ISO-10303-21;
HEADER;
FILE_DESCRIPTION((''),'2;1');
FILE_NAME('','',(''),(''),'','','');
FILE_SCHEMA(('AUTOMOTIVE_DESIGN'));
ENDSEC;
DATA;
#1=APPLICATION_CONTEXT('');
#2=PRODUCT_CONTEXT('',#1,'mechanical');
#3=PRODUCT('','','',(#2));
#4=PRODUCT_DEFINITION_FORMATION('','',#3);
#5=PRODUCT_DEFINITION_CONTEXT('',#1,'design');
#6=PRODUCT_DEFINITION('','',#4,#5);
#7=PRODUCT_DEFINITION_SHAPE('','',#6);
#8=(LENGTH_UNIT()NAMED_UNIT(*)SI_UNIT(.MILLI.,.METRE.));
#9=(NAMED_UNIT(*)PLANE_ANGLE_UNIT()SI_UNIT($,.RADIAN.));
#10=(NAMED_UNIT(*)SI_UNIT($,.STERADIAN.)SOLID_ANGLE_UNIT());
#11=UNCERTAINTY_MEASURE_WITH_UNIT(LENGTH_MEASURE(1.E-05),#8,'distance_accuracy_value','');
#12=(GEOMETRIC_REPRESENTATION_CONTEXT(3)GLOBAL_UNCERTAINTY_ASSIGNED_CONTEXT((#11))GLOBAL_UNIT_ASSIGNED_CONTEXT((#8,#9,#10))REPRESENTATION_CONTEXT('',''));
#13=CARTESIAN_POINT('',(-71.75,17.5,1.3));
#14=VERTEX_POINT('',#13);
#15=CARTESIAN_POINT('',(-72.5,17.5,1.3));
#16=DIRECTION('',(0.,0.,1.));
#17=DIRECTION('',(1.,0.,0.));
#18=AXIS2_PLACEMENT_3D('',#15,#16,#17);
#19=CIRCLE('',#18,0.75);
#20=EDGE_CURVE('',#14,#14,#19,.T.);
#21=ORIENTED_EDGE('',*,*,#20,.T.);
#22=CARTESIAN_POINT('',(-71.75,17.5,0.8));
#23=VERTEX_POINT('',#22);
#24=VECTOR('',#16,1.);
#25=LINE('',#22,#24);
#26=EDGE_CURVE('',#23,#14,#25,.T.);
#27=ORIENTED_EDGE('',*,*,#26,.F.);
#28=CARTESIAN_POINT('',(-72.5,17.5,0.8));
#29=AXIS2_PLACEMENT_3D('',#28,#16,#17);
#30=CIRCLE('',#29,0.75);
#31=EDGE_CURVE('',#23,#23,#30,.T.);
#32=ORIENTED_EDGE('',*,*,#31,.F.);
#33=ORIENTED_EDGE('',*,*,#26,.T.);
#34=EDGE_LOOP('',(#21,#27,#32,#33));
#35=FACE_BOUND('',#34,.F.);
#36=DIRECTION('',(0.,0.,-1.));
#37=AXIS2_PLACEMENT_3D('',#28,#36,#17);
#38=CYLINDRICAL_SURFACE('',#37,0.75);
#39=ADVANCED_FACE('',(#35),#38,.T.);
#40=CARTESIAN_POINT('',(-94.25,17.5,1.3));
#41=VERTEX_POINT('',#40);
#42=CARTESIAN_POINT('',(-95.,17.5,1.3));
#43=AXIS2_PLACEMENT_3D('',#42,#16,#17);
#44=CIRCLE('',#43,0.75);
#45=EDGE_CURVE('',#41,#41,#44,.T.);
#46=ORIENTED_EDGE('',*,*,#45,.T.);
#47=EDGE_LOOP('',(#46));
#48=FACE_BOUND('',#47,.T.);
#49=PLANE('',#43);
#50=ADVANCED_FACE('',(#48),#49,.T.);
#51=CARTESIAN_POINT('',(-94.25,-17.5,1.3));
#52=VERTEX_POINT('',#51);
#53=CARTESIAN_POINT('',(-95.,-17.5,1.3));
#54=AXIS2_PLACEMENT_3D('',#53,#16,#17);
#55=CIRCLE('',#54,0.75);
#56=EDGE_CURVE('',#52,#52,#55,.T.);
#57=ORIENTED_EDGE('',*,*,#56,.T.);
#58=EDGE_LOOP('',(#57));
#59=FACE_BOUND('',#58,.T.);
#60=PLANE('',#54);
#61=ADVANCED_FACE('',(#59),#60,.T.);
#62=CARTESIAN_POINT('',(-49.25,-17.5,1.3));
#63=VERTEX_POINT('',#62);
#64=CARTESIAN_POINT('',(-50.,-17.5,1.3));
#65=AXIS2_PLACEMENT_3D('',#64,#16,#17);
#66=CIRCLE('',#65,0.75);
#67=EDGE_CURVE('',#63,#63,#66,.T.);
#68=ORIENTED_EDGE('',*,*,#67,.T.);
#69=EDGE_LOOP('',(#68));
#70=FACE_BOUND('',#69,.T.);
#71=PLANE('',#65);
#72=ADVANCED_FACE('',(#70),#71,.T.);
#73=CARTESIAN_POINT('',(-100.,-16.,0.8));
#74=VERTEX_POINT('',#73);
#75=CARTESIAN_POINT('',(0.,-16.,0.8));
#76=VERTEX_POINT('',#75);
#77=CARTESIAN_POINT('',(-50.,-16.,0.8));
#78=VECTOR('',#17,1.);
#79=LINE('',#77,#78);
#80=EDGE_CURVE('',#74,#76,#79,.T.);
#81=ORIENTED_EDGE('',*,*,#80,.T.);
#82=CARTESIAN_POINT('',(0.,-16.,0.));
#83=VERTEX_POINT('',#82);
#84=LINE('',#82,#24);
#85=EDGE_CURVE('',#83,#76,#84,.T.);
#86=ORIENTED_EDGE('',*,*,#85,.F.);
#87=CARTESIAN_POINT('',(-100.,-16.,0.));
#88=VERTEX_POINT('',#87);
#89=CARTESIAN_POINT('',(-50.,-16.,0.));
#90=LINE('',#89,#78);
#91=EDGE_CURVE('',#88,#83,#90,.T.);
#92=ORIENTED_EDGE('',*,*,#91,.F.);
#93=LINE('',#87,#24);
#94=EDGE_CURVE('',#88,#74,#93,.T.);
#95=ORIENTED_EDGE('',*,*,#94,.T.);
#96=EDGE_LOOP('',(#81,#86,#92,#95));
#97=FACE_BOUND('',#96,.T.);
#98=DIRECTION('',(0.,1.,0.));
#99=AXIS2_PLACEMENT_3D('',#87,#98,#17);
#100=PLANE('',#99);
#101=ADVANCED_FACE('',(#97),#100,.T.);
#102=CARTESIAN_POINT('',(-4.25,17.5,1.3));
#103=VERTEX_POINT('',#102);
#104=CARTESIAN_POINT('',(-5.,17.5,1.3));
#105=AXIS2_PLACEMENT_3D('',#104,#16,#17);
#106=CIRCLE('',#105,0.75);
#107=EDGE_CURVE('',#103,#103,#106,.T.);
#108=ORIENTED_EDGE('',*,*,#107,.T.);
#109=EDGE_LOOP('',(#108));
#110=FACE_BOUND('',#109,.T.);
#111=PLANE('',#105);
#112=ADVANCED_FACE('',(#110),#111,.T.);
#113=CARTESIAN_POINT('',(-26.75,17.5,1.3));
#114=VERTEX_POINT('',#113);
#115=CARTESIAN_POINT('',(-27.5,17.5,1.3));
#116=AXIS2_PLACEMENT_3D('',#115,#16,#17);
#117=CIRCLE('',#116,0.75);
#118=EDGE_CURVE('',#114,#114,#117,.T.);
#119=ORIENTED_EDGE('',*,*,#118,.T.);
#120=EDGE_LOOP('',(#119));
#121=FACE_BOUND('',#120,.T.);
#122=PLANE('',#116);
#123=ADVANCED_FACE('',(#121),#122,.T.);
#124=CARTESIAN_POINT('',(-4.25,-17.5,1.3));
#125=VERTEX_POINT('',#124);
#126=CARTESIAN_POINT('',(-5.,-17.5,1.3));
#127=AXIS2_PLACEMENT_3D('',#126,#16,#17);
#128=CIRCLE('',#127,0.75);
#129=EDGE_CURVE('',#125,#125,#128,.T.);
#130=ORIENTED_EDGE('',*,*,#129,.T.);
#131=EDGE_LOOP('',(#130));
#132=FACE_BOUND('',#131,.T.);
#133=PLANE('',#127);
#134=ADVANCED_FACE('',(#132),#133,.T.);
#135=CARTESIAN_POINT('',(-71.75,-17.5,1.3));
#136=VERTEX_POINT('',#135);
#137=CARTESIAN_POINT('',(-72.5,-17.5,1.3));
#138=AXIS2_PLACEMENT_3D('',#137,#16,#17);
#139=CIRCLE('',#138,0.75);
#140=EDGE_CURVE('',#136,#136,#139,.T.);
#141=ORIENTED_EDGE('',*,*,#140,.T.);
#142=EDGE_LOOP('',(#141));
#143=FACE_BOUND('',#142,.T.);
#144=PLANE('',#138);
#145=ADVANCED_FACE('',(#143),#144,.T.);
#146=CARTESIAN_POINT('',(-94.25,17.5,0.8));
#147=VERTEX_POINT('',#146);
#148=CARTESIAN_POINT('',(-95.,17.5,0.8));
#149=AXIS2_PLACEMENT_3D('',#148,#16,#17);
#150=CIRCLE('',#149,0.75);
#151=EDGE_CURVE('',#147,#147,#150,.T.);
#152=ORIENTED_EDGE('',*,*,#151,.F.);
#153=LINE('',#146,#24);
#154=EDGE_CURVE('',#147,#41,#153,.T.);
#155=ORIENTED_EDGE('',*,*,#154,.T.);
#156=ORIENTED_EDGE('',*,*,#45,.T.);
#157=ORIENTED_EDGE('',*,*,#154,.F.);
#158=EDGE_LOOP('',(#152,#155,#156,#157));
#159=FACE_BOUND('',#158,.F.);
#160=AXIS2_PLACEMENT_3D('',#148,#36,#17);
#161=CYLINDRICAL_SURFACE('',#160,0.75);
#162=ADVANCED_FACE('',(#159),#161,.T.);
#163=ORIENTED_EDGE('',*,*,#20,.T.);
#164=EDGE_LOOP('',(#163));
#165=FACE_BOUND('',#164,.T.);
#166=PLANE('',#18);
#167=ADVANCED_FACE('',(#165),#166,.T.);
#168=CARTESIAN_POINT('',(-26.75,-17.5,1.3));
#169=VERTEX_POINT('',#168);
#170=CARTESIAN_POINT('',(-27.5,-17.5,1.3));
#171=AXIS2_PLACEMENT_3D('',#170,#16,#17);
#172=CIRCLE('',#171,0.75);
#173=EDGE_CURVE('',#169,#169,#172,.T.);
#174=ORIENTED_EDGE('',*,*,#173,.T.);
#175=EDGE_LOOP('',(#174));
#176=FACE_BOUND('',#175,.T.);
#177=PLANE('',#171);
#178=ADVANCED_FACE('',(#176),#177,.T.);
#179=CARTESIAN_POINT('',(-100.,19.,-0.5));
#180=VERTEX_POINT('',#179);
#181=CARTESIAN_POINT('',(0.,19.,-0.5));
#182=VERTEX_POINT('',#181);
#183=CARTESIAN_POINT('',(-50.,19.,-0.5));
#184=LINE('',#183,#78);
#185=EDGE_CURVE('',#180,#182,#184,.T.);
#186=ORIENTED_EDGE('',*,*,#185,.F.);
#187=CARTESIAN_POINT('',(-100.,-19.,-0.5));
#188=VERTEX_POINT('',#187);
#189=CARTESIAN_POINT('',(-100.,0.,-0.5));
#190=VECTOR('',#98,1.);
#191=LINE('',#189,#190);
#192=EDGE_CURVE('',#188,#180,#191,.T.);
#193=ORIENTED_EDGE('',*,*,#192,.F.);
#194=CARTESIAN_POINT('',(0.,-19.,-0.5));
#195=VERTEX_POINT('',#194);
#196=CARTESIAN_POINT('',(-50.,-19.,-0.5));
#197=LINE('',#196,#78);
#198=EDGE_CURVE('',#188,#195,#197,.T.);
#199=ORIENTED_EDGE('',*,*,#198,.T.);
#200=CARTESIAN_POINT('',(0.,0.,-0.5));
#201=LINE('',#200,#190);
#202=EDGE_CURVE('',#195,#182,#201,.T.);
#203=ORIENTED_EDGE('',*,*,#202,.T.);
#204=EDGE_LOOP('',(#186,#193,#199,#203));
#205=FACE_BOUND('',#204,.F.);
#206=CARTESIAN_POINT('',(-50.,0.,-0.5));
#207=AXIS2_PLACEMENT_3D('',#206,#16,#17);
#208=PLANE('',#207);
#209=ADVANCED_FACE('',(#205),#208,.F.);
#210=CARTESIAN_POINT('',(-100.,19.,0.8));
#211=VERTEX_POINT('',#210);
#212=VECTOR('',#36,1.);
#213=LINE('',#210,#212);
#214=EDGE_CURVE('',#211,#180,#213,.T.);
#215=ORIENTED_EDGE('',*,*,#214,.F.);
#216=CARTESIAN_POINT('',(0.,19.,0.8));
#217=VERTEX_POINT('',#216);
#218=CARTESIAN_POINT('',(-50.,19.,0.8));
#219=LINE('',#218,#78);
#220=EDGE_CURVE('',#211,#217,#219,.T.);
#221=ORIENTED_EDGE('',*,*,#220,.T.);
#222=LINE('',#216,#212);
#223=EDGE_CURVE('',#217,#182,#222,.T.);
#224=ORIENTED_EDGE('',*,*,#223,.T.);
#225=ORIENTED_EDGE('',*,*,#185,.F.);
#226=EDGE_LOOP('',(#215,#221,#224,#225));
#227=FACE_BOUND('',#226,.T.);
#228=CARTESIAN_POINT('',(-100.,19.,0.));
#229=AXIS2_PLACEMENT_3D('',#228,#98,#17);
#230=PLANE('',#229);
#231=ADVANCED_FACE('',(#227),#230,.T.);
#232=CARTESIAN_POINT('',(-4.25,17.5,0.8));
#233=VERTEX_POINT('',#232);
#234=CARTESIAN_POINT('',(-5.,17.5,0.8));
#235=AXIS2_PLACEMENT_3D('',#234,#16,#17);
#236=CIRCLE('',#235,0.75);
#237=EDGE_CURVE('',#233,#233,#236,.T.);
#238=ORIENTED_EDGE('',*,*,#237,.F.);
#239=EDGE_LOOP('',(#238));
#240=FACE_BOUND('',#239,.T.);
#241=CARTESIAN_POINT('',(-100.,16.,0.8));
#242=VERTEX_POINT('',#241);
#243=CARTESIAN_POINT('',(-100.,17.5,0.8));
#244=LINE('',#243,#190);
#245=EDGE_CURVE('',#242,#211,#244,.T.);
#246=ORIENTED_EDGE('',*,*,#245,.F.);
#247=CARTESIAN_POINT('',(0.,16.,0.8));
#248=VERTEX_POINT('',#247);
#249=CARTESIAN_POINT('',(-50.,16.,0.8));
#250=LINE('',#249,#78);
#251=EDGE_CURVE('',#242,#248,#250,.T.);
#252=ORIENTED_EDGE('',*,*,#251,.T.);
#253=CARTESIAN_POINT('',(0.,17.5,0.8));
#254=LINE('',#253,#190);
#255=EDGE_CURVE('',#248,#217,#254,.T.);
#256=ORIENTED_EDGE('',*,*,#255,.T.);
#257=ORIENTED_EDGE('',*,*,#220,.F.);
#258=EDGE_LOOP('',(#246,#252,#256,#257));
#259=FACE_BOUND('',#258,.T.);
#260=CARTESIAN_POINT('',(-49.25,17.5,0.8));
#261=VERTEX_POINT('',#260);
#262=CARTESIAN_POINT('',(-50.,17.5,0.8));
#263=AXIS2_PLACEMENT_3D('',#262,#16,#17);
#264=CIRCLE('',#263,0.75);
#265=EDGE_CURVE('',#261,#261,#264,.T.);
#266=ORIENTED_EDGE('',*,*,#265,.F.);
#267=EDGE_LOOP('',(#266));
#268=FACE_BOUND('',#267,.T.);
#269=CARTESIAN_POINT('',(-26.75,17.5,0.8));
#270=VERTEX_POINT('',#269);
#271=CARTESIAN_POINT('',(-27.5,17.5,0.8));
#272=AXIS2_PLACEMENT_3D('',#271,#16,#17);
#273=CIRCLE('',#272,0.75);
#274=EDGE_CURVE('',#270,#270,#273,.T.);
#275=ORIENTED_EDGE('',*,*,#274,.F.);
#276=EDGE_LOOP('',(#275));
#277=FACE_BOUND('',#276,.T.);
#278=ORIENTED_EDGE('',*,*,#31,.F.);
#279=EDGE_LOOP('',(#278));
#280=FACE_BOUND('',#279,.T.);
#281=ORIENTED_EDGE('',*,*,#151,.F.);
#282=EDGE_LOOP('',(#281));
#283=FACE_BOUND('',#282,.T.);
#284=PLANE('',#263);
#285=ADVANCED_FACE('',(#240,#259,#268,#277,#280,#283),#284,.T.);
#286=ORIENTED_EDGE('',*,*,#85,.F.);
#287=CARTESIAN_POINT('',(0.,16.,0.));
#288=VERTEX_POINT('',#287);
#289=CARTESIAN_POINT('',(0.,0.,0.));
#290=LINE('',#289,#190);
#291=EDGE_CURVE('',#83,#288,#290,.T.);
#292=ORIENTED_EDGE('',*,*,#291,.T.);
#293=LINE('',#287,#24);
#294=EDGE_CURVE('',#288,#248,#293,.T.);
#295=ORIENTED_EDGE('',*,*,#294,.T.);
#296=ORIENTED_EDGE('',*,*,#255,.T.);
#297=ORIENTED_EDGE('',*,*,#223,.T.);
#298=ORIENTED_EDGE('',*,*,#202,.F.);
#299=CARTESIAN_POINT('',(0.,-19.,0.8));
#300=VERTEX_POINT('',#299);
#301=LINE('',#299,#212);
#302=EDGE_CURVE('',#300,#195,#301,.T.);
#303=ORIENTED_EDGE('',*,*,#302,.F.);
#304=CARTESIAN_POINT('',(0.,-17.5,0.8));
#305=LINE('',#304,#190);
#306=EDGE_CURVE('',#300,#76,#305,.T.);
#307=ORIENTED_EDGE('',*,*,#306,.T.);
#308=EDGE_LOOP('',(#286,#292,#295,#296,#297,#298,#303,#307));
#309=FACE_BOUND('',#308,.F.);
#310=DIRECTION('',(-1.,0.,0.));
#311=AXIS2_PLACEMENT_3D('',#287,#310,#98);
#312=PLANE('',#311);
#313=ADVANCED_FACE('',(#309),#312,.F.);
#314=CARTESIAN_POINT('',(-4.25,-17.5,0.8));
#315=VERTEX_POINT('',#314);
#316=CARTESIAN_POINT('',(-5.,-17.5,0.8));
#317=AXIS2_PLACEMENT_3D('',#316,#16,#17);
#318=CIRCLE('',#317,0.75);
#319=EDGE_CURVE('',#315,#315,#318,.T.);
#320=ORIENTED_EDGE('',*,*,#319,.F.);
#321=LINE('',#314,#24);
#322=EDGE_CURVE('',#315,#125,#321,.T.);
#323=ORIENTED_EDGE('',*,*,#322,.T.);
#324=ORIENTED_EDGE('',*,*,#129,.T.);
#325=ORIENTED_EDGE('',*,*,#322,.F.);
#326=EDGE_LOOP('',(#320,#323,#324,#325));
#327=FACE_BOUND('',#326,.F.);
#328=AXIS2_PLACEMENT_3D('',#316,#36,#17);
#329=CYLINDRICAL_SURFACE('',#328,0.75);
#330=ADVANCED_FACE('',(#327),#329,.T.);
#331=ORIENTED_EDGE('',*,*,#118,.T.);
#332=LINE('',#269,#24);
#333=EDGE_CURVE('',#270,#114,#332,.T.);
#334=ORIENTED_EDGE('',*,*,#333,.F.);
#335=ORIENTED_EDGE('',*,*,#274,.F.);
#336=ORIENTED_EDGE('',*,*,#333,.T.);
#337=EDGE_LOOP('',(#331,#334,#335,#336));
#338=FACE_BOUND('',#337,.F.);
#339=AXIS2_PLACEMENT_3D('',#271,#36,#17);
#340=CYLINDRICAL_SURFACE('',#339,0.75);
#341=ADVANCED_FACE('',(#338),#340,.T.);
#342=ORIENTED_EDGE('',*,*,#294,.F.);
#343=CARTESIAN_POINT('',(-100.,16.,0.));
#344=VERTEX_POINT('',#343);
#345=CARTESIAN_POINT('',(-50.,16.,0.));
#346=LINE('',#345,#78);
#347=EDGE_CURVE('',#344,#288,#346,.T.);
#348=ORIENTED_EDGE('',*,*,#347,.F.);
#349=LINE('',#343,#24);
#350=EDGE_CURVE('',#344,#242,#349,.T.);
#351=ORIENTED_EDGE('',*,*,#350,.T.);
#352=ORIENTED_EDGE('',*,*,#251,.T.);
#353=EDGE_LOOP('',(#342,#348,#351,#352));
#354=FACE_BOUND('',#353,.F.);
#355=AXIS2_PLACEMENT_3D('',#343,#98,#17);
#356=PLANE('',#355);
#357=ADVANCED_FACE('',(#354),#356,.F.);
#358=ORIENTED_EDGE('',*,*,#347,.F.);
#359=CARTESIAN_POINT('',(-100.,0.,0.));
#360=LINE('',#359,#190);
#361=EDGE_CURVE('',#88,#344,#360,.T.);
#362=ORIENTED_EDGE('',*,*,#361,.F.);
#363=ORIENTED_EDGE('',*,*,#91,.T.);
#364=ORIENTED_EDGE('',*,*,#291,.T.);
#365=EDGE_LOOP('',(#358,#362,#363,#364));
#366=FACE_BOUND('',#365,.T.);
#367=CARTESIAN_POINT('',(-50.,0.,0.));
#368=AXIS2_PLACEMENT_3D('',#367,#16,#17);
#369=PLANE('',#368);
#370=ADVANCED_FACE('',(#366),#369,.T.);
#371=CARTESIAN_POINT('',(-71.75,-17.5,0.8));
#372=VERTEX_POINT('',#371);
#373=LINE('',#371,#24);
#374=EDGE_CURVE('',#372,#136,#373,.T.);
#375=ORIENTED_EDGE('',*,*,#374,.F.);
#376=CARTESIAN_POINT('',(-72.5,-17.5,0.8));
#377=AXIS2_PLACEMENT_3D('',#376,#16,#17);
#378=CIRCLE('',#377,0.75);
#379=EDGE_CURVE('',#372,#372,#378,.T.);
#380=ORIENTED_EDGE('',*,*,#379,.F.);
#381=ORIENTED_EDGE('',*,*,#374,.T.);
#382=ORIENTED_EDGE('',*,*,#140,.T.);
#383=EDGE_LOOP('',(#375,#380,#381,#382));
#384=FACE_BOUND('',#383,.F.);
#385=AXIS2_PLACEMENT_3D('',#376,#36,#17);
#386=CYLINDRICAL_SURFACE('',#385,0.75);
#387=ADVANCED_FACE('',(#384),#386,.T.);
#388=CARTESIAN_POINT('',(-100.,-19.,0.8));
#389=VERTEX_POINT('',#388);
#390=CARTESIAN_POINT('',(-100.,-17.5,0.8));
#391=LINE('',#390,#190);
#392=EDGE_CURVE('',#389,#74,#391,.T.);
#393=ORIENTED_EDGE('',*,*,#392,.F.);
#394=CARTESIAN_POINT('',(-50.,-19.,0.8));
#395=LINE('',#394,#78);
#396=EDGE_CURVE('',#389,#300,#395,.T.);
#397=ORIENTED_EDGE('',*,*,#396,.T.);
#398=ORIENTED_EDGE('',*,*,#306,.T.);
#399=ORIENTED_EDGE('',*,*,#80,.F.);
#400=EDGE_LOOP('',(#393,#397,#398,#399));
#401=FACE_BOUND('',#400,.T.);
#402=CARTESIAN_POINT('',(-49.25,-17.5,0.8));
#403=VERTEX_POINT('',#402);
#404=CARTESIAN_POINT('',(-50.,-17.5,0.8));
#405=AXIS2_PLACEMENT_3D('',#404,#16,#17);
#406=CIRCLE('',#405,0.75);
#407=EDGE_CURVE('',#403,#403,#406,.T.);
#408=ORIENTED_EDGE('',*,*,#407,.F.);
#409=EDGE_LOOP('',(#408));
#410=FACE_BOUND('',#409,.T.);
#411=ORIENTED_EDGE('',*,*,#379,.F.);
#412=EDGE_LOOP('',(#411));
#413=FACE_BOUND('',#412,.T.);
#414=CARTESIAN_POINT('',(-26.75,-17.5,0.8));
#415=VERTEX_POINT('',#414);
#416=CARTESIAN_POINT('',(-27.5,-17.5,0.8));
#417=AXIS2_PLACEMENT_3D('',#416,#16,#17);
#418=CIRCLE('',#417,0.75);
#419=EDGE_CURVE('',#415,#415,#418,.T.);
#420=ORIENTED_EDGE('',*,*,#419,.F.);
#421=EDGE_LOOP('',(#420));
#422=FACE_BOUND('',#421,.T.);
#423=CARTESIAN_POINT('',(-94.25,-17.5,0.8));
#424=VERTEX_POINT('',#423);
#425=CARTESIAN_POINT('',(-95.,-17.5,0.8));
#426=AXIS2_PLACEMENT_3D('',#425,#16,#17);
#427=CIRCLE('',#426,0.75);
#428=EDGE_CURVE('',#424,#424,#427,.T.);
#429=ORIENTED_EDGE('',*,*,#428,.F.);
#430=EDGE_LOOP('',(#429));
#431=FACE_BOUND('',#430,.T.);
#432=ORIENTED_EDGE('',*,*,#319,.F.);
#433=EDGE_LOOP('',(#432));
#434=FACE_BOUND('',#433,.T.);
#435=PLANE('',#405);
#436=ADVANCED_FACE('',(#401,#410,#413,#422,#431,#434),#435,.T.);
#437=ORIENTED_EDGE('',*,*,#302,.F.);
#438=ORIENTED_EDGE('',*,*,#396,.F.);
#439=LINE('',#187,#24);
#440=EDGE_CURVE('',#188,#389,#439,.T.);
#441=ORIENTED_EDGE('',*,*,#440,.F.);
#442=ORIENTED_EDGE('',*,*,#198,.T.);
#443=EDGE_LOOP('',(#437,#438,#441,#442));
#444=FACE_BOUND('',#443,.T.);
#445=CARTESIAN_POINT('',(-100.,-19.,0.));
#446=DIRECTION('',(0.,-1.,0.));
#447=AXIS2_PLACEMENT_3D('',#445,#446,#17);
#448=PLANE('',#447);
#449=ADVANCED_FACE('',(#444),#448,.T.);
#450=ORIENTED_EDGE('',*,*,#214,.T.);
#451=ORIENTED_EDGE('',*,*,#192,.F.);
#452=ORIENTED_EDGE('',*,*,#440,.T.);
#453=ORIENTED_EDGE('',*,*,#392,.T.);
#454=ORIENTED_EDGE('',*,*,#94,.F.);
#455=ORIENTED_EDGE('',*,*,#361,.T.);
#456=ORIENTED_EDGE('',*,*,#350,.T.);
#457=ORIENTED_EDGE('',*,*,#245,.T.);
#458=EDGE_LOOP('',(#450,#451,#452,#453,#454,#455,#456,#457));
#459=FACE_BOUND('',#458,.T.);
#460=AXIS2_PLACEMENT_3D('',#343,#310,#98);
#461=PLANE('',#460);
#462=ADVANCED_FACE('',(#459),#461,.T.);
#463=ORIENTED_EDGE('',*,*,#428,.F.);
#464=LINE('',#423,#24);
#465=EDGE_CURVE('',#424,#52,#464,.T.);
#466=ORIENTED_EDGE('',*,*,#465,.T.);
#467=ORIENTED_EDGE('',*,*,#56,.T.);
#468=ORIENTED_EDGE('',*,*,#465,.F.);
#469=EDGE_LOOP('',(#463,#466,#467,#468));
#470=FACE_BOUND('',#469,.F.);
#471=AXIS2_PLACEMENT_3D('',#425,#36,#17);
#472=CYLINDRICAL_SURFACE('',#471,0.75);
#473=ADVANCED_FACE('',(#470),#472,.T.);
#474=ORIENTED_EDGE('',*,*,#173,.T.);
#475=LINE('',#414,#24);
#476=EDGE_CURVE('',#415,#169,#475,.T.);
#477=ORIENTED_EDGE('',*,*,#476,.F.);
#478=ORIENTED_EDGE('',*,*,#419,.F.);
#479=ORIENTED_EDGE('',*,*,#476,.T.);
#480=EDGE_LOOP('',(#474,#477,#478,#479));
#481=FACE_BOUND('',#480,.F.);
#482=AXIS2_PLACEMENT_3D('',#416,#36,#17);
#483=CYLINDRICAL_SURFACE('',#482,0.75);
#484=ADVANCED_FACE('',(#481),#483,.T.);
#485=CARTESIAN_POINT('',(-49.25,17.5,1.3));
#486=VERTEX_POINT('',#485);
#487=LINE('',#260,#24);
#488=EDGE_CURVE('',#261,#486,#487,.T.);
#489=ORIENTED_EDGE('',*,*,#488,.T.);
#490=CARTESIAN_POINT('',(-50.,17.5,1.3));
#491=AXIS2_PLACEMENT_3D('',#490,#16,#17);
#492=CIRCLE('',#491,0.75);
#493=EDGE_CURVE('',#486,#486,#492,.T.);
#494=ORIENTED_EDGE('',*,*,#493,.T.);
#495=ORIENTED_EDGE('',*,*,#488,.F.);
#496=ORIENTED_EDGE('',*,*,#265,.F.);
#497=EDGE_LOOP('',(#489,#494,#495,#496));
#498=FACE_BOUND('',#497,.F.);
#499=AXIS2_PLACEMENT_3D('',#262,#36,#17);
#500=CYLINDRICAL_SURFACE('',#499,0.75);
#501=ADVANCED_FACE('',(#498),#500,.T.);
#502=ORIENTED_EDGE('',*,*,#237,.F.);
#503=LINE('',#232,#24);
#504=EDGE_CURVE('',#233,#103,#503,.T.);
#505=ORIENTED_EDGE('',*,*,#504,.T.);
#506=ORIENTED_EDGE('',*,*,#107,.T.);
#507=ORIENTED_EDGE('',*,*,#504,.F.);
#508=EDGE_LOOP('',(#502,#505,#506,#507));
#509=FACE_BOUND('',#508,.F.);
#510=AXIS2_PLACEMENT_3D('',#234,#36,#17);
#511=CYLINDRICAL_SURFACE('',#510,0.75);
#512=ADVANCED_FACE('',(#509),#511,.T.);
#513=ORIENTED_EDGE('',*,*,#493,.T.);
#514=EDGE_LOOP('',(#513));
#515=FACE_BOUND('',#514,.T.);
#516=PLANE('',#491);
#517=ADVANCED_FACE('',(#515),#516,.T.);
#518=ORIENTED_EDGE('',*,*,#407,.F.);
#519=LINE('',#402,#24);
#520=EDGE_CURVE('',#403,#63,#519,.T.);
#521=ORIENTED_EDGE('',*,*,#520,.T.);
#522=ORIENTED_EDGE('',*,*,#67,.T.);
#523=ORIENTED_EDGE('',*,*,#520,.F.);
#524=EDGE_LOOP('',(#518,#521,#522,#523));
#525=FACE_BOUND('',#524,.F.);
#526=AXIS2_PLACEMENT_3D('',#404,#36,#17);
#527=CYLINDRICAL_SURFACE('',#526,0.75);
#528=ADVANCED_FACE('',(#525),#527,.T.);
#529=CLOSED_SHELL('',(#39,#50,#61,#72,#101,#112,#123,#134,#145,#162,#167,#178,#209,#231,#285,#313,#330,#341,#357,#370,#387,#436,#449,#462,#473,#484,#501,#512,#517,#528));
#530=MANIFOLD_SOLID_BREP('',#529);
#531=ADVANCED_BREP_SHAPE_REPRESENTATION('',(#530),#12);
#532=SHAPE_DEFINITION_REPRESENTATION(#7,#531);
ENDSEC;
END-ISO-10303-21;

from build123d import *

# Parameters (mm, degrees)
F0_W     = 100
F0_H     = 38
F1_DEPTH = 0.5
F2_W     = 100
F2_H     = 3
F3_DEPTH = 0.8
F4_R     = 0.75
F5_DEPTH = 0.5
F6_R     = 0.75
F7_DEPTH = 0.5


# Not quite as in the source:
# - a feature names something its author has since deleted; it is built from what else it names


with BuildPart() as f1:
    # F0 (on Top) → F1 (new body)
    with BuildSketch(Plane.XY):
        with Locations((-50, 0)):
            Rectangle(F0_W, F0_H)
    extrude(amount=-F1_DEPTH)

    # F2 (on face) → F3 (join)
    with BuildSketch(Plane.XY):
        with Locations((-50, 17.5)):
            Rectangle(F2_W, F2_H)
        with Locations((-50, -17.5)):
            Rectangle(F2_W, F2_H)
    extrude(amount=F3_DEPTH)

    # F4 (on face) → F5 (join)
    with BuildSketch(Plane.XY.offset(0.8)):
        with Locations((-95, 17.5)):
            Circle(F4_R)
        with Locations((-72.5, 17.5)):
            Circle(F4_R)
        with Locations((-50, 17.5)):
            Circle(F4_R)
        with Locations((-27.5, 17.5)):
            Circle(F4_R)
        with Locations((-5, 17.5)):
            Circle(F4_R)
    extrude(amount=F5_DEPTH)

    # F6 (on face) → F7 (join)
    with BuildSketch(Plane.XY.offset(0.8)):
        with Locations((-95, -17.5)):
            Circle(F6_R)
        with Locations((-72.5, -17.5)):
            Circle(F6_R)
        with Locations((-50, -17.5)):
            Circle(F6_R)
        with Locations((-27.5, -17.5)):
            Circle(F6_R)
        with Locations((-5, -17.5)):
            Circle(F6_R)
    extrude(amount=F7_DEPTH)


solid = f1.part
